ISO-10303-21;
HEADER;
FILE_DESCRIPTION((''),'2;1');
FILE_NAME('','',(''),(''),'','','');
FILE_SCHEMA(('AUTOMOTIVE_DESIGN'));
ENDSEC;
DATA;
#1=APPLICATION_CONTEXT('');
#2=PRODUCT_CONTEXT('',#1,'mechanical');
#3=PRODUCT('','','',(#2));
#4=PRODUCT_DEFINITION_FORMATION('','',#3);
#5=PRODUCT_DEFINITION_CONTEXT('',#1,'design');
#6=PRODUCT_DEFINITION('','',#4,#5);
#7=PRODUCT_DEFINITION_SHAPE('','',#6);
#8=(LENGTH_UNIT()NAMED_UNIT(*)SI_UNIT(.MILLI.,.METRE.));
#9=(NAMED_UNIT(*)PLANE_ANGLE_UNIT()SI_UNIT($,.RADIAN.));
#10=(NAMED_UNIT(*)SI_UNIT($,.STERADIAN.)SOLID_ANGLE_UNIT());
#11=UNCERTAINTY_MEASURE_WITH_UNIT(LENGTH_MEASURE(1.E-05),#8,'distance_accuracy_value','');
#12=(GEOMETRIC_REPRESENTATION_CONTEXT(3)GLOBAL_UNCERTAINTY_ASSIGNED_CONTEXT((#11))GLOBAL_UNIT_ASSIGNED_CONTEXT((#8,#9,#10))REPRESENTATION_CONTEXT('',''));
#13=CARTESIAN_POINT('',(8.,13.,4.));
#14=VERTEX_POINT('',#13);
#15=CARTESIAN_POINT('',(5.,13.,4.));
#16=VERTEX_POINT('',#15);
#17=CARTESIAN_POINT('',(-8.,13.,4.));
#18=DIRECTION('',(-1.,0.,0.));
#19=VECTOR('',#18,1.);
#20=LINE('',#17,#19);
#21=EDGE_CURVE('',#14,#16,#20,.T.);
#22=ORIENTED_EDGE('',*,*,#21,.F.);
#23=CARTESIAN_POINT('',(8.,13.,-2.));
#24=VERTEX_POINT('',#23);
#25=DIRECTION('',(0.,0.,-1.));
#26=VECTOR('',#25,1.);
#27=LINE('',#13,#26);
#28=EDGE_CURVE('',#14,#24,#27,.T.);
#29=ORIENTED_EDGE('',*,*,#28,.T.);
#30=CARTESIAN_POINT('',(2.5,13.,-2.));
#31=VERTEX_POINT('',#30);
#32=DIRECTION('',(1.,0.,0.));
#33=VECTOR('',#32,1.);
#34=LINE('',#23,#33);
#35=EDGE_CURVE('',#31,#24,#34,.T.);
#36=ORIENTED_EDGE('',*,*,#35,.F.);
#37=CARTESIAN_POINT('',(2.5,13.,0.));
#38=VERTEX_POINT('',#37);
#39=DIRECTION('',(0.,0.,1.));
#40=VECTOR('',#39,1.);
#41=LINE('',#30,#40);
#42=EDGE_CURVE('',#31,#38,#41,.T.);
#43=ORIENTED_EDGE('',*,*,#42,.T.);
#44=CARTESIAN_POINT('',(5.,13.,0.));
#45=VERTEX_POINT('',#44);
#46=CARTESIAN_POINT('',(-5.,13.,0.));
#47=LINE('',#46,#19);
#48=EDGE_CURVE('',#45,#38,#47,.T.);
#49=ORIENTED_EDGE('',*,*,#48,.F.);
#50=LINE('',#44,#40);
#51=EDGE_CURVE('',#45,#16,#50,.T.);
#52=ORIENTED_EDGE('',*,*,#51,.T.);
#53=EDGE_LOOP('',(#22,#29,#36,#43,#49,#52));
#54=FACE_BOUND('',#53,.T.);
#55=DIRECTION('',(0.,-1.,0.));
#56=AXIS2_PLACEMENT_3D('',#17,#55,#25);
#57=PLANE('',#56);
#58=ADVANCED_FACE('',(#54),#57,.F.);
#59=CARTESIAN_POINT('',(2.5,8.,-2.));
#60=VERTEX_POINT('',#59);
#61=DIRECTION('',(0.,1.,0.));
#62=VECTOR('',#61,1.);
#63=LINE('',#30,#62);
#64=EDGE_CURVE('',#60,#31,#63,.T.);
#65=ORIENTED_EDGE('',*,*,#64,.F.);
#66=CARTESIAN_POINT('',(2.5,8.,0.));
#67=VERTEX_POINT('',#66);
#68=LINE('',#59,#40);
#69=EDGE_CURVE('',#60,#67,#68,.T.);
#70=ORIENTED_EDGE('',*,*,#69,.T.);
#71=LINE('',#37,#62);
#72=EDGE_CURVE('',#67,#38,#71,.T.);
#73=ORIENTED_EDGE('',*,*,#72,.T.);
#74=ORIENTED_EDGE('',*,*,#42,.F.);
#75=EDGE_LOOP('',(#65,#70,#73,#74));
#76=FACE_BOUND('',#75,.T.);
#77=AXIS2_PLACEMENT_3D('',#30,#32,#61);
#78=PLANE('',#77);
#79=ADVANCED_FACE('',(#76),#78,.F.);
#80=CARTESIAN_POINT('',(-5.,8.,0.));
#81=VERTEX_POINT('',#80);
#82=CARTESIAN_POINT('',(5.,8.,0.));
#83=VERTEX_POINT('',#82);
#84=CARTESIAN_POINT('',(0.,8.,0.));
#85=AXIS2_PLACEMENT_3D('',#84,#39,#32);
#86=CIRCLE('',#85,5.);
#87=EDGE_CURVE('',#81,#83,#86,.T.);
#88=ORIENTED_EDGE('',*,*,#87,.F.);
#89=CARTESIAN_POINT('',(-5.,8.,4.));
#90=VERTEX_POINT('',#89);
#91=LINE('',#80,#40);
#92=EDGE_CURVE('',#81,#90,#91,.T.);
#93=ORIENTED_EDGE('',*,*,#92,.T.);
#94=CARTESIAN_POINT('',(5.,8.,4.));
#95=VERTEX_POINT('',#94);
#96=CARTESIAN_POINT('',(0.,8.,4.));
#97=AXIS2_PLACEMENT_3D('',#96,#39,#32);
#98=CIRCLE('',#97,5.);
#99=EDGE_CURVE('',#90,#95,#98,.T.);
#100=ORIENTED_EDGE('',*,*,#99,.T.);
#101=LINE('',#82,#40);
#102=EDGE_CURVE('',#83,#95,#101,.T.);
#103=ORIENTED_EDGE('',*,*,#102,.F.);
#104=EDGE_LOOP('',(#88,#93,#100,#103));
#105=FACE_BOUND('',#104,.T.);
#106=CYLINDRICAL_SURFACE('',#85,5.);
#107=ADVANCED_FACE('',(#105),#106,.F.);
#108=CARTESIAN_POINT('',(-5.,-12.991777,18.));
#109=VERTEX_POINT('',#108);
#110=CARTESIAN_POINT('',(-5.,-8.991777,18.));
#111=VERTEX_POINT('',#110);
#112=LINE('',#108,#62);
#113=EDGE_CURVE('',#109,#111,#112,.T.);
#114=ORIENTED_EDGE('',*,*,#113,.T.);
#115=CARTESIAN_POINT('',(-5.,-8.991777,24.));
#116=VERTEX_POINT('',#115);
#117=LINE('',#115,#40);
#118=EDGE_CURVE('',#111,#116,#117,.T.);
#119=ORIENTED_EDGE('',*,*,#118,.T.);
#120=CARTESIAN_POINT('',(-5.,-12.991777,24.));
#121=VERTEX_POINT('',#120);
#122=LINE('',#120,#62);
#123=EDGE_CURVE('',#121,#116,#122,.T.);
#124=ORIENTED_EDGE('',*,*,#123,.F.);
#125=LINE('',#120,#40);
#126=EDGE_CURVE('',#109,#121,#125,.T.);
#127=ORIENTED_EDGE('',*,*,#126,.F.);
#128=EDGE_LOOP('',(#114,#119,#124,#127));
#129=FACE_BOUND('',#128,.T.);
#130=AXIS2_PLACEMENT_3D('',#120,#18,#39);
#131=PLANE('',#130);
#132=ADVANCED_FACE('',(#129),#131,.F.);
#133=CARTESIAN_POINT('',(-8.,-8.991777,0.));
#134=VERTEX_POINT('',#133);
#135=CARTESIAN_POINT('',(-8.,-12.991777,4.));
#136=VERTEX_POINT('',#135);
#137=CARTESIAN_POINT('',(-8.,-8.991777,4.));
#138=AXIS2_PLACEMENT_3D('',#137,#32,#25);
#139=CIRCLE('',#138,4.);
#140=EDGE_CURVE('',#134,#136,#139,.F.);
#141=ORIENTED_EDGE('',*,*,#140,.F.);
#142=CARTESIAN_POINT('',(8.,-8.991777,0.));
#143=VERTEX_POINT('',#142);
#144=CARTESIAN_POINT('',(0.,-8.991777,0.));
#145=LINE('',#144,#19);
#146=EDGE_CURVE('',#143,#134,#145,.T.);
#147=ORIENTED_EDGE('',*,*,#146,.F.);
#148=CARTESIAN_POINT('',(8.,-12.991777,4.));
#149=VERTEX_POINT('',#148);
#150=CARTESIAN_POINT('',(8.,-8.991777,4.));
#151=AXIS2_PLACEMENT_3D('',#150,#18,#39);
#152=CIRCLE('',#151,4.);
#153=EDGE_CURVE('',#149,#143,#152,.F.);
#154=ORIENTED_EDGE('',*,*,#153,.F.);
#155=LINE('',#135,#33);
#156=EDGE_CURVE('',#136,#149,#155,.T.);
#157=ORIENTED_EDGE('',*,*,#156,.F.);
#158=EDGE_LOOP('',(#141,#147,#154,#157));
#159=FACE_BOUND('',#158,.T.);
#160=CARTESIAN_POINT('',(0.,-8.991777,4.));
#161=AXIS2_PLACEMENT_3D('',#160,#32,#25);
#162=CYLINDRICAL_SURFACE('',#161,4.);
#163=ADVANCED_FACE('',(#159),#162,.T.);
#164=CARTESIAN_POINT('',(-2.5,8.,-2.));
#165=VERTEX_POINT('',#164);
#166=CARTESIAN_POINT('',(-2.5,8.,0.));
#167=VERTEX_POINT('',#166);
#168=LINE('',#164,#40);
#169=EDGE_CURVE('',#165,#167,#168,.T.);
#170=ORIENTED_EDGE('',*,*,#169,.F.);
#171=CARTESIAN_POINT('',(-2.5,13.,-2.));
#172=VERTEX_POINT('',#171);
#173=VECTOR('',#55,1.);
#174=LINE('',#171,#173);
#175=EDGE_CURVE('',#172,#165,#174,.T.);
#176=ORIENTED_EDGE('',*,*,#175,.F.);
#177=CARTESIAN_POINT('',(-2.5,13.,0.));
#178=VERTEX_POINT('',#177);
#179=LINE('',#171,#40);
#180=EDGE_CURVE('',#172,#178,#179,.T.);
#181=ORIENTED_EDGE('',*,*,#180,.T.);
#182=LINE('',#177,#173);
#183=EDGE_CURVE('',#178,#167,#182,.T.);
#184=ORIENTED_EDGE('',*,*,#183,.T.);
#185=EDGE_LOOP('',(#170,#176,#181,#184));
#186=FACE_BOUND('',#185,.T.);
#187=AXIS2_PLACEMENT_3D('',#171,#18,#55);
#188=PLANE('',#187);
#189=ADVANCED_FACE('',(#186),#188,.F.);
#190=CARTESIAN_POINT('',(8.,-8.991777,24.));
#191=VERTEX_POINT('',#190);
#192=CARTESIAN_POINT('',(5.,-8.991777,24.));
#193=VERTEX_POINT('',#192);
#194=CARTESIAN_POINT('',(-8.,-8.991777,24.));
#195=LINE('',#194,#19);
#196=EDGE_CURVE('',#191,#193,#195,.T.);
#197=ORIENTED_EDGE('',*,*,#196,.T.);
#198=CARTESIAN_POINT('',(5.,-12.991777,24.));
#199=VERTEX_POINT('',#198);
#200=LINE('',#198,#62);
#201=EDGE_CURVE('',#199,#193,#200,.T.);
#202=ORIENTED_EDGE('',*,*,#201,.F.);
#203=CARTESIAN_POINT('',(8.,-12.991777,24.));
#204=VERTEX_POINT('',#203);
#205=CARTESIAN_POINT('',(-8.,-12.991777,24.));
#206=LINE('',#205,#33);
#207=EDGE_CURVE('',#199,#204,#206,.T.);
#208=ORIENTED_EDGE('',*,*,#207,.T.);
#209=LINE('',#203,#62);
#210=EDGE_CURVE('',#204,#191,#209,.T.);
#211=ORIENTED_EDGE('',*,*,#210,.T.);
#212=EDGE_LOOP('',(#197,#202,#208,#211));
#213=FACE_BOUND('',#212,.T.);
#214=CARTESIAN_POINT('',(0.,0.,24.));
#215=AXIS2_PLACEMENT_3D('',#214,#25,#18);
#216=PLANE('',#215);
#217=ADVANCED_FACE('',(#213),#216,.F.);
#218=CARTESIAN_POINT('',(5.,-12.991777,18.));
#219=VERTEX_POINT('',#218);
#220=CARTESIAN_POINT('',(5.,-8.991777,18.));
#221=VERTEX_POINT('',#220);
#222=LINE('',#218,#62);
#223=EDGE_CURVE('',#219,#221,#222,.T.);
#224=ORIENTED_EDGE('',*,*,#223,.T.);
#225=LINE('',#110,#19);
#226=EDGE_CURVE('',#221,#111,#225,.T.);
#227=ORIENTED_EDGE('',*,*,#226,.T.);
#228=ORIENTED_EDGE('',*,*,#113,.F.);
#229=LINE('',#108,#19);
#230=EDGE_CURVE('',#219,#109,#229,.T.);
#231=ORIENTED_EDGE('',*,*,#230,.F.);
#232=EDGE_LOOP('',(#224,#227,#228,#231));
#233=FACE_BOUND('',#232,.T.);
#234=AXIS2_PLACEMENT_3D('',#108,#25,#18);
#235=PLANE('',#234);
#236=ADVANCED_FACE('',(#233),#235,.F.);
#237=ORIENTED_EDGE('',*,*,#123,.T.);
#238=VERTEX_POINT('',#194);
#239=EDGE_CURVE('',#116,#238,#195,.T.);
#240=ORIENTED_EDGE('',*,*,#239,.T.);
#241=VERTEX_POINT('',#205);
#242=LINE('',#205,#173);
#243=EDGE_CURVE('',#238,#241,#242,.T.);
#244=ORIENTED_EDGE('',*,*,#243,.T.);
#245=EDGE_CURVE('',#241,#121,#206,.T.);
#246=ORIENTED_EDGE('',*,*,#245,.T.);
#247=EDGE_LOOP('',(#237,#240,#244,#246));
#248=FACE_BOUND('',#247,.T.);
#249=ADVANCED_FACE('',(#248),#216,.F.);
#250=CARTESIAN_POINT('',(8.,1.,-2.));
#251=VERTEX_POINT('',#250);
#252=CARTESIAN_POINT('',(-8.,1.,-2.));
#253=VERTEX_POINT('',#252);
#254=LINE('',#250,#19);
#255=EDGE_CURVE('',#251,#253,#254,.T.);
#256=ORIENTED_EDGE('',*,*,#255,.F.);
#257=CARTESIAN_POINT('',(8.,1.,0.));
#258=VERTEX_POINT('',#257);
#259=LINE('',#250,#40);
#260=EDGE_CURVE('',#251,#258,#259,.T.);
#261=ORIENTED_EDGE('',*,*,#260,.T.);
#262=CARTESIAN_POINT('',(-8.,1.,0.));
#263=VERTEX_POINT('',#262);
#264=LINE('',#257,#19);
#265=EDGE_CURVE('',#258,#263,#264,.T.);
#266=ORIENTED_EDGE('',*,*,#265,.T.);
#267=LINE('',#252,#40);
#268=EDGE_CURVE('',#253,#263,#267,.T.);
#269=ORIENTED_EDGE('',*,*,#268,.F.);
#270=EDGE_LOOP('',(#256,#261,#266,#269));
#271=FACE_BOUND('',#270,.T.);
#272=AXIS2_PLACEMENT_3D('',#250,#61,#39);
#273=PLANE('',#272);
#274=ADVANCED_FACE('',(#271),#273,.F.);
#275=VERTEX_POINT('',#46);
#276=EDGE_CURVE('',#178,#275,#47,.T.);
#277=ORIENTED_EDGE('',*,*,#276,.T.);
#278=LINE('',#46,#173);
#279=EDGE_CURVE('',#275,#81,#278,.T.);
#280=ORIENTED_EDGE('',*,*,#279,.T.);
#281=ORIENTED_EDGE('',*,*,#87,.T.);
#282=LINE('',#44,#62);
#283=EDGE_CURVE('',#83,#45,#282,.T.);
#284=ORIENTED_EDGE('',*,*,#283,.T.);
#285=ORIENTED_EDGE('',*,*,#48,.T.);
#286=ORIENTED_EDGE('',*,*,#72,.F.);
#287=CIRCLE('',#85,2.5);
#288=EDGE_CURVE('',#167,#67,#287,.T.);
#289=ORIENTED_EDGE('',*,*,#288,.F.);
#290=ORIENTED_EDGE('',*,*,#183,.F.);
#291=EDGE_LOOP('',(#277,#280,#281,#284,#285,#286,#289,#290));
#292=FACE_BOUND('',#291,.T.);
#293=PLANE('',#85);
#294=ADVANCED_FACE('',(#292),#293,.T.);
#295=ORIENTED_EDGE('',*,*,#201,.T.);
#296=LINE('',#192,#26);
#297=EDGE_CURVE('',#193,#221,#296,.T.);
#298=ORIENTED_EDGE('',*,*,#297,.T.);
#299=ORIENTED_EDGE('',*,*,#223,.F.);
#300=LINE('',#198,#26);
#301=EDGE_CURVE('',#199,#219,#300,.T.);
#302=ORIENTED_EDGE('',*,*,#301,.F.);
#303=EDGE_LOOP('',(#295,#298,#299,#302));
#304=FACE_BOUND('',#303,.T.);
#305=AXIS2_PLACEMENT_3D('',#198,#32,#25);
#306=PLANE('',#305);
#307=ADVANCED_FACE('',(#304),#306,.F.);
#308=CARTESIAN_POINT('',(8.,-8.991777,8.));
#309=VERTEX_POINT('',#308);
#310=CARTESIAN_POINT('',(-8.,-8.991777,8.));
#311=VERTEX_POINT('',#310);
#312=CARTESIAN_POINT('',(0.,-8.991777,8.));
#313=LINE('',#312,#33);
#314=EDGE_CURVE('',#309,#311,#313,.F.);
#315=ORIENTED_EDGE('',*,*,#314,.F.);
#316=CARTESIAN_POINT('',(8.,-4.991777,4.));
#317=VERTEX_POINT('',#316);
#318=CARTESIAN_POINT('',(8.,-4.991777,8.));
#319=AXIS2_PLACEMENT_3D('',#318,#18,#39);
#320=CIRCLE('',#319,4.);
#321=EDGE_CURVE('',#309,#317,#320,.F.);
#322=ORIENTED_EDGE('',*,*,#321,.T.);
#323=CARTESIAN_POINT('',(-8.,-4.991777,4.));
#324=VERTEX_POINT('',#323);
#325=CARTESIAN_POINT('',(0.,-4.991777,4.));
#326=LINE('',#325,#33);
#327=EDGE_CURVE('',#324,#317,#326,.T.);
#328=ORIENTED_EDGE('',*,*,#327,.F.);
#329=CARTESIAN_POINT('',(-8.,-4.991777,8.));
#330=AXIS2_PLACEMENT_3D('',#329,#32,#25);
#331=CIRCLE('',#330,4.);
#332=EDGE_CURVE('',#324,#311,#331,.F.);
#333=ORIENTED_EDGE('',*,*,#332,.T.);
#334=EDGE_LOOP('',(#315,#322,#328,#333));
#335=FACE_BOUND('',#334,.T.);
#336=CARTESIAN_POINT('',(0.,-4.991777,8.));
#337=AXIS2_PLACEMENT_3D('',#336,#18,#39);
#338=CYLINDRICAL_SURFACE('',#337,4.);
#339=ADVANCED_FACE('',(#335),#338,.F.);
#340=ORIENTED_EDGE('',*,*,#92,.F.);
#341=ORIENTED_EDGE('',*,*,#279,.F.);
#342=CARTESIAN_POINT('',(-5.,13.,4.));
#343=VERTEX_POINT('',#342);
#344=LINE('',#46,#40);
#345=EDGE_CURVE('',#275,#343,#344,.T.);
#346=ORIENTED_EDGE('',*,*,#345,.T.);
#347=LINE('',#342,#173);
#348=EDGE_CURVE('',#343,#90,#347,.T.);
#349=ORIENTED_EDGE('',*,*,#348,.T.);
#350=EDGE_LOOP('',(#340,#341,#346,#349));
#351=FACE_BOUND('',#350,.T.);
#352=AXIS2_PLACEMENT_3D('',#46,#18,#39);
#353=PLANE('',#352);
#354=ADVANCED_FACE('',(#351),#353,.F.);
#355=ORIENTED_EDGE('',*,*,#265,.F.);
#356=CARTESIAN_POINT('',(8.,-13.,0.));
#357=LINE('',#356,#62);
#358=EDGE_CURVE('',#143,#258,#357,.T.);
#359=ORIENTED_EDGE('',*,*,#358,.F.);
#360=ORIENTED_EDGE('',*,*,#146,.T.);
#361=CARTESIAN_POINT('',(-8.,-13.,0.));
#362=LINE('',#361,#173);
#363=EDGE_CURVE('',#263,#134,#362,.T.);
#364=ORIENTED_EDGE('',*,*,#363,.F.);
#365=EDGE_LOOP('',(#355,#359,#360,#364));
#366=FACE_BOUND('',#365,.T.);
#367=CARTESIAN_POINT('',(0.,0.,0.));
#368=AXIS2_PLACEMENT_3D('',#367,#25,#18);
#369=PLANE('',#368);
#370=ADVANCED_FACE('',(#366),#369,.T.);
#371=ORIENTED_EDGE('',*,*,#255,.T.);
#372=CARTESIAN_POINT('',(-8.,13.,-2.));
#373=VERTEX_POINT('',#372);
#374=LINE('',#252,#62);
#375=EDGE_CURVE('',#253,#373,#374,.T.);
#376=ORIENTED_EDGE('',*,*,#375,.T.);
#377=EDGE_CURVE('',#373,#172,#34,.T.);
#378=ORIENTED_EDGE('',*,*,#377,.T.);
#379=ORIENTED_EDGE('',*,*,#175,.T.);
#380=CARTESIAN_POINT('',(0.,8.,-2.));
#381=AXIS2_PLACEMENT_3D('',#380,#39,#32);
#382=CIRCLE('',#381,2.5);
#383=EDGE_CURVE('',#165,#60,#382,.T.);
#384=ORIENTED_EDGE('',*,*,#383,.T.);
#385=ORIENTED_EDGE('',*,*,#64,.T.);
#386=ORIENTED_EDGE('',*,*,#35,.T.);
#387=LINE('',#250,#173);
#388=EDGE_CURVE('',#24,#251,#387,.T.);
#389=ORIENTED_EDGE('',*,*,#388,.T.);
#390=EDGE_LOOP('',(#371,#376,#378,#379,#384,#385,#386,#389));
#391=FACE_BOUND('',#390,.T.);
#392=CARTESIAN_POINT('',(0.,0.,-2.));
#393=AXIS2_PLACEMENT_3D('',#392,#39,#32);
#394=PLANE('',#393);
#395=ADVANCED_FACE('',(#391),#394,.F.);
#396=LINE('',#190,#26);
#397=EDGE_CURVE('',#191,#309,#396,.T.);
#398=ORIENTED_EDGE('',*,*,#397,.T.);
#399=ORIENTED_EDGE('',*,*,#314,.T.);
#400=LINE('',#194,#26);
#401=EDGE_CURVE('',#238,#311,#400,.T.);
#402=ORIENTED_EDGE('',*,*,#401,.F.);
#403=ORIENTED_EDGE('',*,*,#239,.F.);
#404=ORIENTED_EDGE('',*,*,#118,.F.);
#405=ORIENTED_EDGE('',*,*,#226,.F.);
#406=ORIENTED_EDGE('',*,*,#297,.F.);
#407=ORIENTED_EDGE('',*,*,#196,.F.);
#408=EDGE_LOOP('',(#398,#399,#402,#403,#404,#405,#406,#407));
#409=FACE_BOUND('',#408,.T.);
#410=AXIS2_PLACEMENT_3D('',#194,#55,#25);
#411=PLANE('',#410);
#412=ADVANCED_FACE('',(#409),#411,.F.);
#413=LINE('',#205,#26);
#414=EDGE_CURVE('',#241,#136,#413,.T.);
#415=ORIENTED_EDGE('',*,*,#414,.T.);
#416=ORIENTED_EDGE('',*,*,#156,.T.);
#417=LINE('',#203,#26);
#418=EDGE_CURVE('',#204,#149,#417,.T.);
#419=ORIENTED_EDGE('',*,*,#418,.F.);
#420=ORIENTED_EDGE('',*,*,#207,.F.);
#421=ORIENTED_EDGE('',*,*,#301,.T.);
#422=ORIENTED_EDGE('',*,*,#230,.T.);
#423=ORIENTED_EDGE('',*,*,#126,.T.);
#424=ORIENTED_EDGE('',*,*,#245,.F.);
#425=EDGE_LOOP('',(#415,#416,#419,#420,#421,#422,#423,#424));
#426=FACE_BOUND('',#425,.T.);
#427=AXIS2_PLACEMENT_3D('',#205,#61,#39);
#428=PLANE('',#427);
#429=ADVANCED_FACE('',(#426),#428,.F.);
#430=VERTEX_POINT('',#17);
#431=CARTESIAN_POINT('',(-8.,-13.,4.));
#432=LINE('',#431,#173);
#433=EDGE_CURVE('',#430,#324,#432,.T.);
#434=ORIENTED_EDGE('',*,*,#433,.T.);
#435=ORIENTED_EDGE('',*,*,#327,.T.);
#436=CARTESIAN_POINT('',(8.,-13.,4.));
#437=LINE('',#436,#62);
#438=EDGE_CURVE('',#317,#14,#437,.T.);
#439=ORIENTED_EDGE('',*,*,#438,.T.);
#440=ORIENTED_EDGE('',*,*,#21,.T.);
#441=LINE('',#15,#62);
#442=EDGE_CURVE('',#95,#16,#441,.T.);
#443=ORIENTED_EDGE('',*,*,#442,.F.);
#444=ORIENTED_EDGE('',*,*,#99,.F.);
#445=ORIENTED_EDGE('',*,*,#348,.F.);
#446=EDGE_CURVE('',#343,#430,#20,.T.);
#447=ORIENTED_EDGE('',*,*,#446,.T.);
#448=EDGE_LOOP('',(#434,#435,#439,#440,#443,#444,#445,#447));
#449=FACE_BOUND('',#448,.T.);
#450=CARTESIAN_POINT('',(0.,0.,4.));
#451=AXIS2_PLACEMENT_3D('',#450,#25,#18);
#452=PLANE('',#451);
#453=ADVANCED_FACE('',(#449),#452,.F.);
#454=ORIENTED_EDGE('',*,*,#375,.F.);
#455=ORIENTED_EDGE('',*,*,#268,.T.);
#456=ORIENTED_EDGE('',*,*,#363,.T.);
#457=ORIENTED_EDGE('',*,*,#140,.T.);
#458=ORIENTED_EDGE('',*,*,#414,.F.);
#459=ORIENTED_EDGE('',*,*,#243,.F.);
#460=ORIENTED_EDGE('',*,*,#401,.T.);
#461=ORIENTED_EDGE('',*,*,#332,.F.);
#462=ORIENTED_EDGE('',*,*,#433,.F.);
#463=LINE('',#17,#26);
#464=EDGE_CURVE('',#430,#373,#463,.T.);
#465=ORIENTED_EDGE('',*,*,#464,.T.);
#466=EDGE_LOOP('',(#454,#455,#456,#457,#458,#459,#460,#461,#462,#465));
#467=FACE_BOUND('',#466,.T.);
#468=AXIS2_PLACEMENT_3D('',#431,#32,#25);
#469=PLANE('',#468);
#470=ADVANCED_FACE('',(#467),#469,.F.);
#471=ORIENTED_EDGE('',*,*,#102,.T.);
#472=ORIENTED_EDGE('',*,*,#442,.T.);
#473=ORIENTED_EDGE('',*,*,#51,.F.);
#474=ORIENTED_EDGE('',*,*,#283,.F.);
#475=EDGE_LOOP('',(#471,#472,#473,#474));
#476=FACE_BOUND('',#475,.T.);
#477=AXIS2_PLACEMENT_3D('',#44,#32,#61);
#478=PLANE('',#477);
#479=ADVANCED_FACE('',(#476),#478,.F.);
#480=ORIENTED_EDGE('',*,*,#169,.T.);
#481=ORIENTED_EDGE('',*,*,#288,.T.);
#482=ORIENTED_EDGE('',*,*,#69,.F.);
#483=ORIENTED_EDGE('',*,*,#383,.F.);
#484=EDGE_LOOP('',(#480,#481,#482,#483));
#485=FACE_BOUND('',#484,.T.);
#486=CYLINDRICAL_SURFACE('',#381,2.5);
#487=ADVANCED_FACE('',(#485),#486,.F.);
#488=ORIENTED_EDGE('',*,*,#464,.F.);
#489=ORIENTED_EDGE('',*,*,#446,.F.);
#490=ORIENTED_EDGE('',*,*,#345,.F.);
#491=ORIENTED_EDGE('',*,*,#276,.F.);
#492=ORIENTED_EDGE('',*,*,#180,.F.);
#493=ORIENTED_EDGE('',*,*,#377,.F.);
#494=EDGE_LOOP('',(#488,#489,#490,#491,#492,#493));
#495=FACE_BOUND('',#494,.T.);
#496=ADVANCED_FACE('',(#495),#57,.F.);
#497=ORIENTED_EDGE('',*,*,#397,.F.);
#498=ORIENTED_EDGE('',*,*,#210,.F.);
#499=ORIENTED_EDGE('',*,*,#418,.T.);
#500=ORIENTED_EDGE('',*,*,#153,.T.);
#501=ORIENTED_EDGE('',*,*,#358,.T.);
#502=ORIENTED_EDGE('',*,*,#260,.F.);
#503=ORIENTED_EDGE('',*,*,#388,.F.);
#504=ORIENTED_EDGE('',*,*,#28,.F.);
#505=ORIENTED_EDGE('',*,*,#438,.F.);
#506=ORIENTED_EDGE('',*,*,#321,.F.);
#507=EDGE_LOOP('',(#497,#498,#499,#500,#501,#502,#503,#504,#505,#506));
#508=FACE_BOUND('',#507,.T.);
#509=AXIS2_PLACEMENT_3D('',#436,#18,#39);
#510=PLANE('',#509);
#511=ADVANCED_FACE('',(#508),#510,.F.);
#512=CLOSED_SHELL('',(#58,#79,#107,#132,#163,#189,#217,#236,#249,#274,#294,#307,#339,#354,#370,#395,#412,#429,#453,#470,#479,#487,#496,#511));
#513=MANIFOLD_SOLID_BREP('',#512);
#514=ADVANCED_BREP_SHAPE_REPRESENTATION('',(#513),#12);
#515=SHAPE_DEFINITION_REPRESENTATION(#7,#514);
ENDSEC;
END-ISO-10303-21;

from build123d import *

# Parameters (mm, degrees)
SKETCH_1_W          = 16
SKETCH_1_H          = 26
EXTRUDE_1_DEPTH     = 4
SKETCH_2_W          = 16
SKETCH_2_H          = 4
EXTRUDE_2_DEPTH     = 20
SKETCH_3_W          = 16
SKETCH_3_H          = 12
EXTRUDE_3_DEPTH     = 2
FILLET_2_R          = 4
FILLET_START        = -8
FILLET_3_DEPTH      = 16
SKETCH_4_W          = 10
SKETCH_4_H          = 6
CUT_EXTRUDE_2_DEPTH = 34.520714063
CUT_EXTRUDE_3_DEPTH = 4
CUT_EXTRUDE_4_DEPTH = 2


with BuildPart() as part:
    # Эскиз1 → Бобышка-Вытянуть1 (new body)
    with BuildSketch(Plane.XY):
        Rectangle(SKETCH_1_W, SKETCH_1_H)
    extrude(amount=EXTRUDE_1_DEPTH)

    # Эскиз2 → Бобышка-Вытянуть2 (add)
    with BuildSketch(Plane.XY.offset(4)):
        with Locations((0, -10.991777356)):
            Rectangle(SKETCH_2_W, SKETCH_2_H)
    extrude(amount=EXTRUDE_2_DEPTH)

    # Эскиз3 → Бобышка-Вытянуть3 (add)
    with BuildSketch(Plane(origin=(0, 0, 0), x_dir=(-1, 0, 0), z_dir=(0, 0, -1))):
        with Locations((0, 7)):
            Rectangle(SKETCH_3_W, SKETCH_3_H)
    extrude(amount=EXTRUDE_3_DEPTH)

    # Скругление2
    fillet_2_edges = [part.edges().sort_by_distance(p)[0] for p in [
        (0, -8.991777356, 4),
    ]]
    fillet(fillet_2_edges, radius=FILLET_2_R)

    # Скругление3: read off the stored shape, not the designer's step
    # Скругление3 outline → Скругление3 (cut)
    with BuildSketch(Plane.YZ.offset(FILLET_START)):
        with BuildLine():
            ThreePointArc((-8.991777356, 0), (-11.820204481, 1.171572875), (-12.991777356, 4))
            Line((-12.991777356, 4), (-13, 4))
            Line((-13, 4), (-13, 0))
            Line((-13, 0), (-8.991777356, 0))
        make_face()
    extrude(amount=FILLET_3_DEPTH, mode=Mode.SUBTRACT)

    # Эскиз4 → Вырез-Вытянуть2 (cut, through all)
    with BuildSketch(Plane(origin=(0, -8.991777356, 0), x_dir=(1, 0, 0), z_dir=(0, 1, 0))):
        with Locations((0, -21)):
            Rectangle(SKETCH_4_W, SKETCH_4_H)
    extrude(amount=-CUT_EXTRUDE_2_DEPTH, mode=Mode.SUBTRACT)

    # Эскиз5 → Вырез-Вытянуть3 (cut)
    with BuildSketch(Plane.XY.offset(4)):
        with BuildLine():
            Line((-5, 13), (-5, 8))
            ThreePointArc((-5, 8), (0, 3), (5, 8))
            Line((5, 8), (5, 13))
            Line((5, 13), (-5, 13))
        make_face()
    extrude(amount=-CUT_EXTRUDE_3_DEPTH, mode=Mode.SUBTRACT)

    # Эскиз7 → Вырез-Вытянуть4 (cut)
    with BuildSketch(Plane.XY):
        with BuildLine():
            Line((-2.5, 13), (-2.5, 8))
            ThreePointArc((-2.5, 8), (0, 5.5), (2.5, 8))
            Line((2.5, 8), (2.5, 13))
            Line((2.5, 13), (-2.5, 13))
        make_face()
    extrude(amount=-CUT_EXTRUDE_4_DEPTH, mode=Mode.SUBTRACT)


solid = part.part
